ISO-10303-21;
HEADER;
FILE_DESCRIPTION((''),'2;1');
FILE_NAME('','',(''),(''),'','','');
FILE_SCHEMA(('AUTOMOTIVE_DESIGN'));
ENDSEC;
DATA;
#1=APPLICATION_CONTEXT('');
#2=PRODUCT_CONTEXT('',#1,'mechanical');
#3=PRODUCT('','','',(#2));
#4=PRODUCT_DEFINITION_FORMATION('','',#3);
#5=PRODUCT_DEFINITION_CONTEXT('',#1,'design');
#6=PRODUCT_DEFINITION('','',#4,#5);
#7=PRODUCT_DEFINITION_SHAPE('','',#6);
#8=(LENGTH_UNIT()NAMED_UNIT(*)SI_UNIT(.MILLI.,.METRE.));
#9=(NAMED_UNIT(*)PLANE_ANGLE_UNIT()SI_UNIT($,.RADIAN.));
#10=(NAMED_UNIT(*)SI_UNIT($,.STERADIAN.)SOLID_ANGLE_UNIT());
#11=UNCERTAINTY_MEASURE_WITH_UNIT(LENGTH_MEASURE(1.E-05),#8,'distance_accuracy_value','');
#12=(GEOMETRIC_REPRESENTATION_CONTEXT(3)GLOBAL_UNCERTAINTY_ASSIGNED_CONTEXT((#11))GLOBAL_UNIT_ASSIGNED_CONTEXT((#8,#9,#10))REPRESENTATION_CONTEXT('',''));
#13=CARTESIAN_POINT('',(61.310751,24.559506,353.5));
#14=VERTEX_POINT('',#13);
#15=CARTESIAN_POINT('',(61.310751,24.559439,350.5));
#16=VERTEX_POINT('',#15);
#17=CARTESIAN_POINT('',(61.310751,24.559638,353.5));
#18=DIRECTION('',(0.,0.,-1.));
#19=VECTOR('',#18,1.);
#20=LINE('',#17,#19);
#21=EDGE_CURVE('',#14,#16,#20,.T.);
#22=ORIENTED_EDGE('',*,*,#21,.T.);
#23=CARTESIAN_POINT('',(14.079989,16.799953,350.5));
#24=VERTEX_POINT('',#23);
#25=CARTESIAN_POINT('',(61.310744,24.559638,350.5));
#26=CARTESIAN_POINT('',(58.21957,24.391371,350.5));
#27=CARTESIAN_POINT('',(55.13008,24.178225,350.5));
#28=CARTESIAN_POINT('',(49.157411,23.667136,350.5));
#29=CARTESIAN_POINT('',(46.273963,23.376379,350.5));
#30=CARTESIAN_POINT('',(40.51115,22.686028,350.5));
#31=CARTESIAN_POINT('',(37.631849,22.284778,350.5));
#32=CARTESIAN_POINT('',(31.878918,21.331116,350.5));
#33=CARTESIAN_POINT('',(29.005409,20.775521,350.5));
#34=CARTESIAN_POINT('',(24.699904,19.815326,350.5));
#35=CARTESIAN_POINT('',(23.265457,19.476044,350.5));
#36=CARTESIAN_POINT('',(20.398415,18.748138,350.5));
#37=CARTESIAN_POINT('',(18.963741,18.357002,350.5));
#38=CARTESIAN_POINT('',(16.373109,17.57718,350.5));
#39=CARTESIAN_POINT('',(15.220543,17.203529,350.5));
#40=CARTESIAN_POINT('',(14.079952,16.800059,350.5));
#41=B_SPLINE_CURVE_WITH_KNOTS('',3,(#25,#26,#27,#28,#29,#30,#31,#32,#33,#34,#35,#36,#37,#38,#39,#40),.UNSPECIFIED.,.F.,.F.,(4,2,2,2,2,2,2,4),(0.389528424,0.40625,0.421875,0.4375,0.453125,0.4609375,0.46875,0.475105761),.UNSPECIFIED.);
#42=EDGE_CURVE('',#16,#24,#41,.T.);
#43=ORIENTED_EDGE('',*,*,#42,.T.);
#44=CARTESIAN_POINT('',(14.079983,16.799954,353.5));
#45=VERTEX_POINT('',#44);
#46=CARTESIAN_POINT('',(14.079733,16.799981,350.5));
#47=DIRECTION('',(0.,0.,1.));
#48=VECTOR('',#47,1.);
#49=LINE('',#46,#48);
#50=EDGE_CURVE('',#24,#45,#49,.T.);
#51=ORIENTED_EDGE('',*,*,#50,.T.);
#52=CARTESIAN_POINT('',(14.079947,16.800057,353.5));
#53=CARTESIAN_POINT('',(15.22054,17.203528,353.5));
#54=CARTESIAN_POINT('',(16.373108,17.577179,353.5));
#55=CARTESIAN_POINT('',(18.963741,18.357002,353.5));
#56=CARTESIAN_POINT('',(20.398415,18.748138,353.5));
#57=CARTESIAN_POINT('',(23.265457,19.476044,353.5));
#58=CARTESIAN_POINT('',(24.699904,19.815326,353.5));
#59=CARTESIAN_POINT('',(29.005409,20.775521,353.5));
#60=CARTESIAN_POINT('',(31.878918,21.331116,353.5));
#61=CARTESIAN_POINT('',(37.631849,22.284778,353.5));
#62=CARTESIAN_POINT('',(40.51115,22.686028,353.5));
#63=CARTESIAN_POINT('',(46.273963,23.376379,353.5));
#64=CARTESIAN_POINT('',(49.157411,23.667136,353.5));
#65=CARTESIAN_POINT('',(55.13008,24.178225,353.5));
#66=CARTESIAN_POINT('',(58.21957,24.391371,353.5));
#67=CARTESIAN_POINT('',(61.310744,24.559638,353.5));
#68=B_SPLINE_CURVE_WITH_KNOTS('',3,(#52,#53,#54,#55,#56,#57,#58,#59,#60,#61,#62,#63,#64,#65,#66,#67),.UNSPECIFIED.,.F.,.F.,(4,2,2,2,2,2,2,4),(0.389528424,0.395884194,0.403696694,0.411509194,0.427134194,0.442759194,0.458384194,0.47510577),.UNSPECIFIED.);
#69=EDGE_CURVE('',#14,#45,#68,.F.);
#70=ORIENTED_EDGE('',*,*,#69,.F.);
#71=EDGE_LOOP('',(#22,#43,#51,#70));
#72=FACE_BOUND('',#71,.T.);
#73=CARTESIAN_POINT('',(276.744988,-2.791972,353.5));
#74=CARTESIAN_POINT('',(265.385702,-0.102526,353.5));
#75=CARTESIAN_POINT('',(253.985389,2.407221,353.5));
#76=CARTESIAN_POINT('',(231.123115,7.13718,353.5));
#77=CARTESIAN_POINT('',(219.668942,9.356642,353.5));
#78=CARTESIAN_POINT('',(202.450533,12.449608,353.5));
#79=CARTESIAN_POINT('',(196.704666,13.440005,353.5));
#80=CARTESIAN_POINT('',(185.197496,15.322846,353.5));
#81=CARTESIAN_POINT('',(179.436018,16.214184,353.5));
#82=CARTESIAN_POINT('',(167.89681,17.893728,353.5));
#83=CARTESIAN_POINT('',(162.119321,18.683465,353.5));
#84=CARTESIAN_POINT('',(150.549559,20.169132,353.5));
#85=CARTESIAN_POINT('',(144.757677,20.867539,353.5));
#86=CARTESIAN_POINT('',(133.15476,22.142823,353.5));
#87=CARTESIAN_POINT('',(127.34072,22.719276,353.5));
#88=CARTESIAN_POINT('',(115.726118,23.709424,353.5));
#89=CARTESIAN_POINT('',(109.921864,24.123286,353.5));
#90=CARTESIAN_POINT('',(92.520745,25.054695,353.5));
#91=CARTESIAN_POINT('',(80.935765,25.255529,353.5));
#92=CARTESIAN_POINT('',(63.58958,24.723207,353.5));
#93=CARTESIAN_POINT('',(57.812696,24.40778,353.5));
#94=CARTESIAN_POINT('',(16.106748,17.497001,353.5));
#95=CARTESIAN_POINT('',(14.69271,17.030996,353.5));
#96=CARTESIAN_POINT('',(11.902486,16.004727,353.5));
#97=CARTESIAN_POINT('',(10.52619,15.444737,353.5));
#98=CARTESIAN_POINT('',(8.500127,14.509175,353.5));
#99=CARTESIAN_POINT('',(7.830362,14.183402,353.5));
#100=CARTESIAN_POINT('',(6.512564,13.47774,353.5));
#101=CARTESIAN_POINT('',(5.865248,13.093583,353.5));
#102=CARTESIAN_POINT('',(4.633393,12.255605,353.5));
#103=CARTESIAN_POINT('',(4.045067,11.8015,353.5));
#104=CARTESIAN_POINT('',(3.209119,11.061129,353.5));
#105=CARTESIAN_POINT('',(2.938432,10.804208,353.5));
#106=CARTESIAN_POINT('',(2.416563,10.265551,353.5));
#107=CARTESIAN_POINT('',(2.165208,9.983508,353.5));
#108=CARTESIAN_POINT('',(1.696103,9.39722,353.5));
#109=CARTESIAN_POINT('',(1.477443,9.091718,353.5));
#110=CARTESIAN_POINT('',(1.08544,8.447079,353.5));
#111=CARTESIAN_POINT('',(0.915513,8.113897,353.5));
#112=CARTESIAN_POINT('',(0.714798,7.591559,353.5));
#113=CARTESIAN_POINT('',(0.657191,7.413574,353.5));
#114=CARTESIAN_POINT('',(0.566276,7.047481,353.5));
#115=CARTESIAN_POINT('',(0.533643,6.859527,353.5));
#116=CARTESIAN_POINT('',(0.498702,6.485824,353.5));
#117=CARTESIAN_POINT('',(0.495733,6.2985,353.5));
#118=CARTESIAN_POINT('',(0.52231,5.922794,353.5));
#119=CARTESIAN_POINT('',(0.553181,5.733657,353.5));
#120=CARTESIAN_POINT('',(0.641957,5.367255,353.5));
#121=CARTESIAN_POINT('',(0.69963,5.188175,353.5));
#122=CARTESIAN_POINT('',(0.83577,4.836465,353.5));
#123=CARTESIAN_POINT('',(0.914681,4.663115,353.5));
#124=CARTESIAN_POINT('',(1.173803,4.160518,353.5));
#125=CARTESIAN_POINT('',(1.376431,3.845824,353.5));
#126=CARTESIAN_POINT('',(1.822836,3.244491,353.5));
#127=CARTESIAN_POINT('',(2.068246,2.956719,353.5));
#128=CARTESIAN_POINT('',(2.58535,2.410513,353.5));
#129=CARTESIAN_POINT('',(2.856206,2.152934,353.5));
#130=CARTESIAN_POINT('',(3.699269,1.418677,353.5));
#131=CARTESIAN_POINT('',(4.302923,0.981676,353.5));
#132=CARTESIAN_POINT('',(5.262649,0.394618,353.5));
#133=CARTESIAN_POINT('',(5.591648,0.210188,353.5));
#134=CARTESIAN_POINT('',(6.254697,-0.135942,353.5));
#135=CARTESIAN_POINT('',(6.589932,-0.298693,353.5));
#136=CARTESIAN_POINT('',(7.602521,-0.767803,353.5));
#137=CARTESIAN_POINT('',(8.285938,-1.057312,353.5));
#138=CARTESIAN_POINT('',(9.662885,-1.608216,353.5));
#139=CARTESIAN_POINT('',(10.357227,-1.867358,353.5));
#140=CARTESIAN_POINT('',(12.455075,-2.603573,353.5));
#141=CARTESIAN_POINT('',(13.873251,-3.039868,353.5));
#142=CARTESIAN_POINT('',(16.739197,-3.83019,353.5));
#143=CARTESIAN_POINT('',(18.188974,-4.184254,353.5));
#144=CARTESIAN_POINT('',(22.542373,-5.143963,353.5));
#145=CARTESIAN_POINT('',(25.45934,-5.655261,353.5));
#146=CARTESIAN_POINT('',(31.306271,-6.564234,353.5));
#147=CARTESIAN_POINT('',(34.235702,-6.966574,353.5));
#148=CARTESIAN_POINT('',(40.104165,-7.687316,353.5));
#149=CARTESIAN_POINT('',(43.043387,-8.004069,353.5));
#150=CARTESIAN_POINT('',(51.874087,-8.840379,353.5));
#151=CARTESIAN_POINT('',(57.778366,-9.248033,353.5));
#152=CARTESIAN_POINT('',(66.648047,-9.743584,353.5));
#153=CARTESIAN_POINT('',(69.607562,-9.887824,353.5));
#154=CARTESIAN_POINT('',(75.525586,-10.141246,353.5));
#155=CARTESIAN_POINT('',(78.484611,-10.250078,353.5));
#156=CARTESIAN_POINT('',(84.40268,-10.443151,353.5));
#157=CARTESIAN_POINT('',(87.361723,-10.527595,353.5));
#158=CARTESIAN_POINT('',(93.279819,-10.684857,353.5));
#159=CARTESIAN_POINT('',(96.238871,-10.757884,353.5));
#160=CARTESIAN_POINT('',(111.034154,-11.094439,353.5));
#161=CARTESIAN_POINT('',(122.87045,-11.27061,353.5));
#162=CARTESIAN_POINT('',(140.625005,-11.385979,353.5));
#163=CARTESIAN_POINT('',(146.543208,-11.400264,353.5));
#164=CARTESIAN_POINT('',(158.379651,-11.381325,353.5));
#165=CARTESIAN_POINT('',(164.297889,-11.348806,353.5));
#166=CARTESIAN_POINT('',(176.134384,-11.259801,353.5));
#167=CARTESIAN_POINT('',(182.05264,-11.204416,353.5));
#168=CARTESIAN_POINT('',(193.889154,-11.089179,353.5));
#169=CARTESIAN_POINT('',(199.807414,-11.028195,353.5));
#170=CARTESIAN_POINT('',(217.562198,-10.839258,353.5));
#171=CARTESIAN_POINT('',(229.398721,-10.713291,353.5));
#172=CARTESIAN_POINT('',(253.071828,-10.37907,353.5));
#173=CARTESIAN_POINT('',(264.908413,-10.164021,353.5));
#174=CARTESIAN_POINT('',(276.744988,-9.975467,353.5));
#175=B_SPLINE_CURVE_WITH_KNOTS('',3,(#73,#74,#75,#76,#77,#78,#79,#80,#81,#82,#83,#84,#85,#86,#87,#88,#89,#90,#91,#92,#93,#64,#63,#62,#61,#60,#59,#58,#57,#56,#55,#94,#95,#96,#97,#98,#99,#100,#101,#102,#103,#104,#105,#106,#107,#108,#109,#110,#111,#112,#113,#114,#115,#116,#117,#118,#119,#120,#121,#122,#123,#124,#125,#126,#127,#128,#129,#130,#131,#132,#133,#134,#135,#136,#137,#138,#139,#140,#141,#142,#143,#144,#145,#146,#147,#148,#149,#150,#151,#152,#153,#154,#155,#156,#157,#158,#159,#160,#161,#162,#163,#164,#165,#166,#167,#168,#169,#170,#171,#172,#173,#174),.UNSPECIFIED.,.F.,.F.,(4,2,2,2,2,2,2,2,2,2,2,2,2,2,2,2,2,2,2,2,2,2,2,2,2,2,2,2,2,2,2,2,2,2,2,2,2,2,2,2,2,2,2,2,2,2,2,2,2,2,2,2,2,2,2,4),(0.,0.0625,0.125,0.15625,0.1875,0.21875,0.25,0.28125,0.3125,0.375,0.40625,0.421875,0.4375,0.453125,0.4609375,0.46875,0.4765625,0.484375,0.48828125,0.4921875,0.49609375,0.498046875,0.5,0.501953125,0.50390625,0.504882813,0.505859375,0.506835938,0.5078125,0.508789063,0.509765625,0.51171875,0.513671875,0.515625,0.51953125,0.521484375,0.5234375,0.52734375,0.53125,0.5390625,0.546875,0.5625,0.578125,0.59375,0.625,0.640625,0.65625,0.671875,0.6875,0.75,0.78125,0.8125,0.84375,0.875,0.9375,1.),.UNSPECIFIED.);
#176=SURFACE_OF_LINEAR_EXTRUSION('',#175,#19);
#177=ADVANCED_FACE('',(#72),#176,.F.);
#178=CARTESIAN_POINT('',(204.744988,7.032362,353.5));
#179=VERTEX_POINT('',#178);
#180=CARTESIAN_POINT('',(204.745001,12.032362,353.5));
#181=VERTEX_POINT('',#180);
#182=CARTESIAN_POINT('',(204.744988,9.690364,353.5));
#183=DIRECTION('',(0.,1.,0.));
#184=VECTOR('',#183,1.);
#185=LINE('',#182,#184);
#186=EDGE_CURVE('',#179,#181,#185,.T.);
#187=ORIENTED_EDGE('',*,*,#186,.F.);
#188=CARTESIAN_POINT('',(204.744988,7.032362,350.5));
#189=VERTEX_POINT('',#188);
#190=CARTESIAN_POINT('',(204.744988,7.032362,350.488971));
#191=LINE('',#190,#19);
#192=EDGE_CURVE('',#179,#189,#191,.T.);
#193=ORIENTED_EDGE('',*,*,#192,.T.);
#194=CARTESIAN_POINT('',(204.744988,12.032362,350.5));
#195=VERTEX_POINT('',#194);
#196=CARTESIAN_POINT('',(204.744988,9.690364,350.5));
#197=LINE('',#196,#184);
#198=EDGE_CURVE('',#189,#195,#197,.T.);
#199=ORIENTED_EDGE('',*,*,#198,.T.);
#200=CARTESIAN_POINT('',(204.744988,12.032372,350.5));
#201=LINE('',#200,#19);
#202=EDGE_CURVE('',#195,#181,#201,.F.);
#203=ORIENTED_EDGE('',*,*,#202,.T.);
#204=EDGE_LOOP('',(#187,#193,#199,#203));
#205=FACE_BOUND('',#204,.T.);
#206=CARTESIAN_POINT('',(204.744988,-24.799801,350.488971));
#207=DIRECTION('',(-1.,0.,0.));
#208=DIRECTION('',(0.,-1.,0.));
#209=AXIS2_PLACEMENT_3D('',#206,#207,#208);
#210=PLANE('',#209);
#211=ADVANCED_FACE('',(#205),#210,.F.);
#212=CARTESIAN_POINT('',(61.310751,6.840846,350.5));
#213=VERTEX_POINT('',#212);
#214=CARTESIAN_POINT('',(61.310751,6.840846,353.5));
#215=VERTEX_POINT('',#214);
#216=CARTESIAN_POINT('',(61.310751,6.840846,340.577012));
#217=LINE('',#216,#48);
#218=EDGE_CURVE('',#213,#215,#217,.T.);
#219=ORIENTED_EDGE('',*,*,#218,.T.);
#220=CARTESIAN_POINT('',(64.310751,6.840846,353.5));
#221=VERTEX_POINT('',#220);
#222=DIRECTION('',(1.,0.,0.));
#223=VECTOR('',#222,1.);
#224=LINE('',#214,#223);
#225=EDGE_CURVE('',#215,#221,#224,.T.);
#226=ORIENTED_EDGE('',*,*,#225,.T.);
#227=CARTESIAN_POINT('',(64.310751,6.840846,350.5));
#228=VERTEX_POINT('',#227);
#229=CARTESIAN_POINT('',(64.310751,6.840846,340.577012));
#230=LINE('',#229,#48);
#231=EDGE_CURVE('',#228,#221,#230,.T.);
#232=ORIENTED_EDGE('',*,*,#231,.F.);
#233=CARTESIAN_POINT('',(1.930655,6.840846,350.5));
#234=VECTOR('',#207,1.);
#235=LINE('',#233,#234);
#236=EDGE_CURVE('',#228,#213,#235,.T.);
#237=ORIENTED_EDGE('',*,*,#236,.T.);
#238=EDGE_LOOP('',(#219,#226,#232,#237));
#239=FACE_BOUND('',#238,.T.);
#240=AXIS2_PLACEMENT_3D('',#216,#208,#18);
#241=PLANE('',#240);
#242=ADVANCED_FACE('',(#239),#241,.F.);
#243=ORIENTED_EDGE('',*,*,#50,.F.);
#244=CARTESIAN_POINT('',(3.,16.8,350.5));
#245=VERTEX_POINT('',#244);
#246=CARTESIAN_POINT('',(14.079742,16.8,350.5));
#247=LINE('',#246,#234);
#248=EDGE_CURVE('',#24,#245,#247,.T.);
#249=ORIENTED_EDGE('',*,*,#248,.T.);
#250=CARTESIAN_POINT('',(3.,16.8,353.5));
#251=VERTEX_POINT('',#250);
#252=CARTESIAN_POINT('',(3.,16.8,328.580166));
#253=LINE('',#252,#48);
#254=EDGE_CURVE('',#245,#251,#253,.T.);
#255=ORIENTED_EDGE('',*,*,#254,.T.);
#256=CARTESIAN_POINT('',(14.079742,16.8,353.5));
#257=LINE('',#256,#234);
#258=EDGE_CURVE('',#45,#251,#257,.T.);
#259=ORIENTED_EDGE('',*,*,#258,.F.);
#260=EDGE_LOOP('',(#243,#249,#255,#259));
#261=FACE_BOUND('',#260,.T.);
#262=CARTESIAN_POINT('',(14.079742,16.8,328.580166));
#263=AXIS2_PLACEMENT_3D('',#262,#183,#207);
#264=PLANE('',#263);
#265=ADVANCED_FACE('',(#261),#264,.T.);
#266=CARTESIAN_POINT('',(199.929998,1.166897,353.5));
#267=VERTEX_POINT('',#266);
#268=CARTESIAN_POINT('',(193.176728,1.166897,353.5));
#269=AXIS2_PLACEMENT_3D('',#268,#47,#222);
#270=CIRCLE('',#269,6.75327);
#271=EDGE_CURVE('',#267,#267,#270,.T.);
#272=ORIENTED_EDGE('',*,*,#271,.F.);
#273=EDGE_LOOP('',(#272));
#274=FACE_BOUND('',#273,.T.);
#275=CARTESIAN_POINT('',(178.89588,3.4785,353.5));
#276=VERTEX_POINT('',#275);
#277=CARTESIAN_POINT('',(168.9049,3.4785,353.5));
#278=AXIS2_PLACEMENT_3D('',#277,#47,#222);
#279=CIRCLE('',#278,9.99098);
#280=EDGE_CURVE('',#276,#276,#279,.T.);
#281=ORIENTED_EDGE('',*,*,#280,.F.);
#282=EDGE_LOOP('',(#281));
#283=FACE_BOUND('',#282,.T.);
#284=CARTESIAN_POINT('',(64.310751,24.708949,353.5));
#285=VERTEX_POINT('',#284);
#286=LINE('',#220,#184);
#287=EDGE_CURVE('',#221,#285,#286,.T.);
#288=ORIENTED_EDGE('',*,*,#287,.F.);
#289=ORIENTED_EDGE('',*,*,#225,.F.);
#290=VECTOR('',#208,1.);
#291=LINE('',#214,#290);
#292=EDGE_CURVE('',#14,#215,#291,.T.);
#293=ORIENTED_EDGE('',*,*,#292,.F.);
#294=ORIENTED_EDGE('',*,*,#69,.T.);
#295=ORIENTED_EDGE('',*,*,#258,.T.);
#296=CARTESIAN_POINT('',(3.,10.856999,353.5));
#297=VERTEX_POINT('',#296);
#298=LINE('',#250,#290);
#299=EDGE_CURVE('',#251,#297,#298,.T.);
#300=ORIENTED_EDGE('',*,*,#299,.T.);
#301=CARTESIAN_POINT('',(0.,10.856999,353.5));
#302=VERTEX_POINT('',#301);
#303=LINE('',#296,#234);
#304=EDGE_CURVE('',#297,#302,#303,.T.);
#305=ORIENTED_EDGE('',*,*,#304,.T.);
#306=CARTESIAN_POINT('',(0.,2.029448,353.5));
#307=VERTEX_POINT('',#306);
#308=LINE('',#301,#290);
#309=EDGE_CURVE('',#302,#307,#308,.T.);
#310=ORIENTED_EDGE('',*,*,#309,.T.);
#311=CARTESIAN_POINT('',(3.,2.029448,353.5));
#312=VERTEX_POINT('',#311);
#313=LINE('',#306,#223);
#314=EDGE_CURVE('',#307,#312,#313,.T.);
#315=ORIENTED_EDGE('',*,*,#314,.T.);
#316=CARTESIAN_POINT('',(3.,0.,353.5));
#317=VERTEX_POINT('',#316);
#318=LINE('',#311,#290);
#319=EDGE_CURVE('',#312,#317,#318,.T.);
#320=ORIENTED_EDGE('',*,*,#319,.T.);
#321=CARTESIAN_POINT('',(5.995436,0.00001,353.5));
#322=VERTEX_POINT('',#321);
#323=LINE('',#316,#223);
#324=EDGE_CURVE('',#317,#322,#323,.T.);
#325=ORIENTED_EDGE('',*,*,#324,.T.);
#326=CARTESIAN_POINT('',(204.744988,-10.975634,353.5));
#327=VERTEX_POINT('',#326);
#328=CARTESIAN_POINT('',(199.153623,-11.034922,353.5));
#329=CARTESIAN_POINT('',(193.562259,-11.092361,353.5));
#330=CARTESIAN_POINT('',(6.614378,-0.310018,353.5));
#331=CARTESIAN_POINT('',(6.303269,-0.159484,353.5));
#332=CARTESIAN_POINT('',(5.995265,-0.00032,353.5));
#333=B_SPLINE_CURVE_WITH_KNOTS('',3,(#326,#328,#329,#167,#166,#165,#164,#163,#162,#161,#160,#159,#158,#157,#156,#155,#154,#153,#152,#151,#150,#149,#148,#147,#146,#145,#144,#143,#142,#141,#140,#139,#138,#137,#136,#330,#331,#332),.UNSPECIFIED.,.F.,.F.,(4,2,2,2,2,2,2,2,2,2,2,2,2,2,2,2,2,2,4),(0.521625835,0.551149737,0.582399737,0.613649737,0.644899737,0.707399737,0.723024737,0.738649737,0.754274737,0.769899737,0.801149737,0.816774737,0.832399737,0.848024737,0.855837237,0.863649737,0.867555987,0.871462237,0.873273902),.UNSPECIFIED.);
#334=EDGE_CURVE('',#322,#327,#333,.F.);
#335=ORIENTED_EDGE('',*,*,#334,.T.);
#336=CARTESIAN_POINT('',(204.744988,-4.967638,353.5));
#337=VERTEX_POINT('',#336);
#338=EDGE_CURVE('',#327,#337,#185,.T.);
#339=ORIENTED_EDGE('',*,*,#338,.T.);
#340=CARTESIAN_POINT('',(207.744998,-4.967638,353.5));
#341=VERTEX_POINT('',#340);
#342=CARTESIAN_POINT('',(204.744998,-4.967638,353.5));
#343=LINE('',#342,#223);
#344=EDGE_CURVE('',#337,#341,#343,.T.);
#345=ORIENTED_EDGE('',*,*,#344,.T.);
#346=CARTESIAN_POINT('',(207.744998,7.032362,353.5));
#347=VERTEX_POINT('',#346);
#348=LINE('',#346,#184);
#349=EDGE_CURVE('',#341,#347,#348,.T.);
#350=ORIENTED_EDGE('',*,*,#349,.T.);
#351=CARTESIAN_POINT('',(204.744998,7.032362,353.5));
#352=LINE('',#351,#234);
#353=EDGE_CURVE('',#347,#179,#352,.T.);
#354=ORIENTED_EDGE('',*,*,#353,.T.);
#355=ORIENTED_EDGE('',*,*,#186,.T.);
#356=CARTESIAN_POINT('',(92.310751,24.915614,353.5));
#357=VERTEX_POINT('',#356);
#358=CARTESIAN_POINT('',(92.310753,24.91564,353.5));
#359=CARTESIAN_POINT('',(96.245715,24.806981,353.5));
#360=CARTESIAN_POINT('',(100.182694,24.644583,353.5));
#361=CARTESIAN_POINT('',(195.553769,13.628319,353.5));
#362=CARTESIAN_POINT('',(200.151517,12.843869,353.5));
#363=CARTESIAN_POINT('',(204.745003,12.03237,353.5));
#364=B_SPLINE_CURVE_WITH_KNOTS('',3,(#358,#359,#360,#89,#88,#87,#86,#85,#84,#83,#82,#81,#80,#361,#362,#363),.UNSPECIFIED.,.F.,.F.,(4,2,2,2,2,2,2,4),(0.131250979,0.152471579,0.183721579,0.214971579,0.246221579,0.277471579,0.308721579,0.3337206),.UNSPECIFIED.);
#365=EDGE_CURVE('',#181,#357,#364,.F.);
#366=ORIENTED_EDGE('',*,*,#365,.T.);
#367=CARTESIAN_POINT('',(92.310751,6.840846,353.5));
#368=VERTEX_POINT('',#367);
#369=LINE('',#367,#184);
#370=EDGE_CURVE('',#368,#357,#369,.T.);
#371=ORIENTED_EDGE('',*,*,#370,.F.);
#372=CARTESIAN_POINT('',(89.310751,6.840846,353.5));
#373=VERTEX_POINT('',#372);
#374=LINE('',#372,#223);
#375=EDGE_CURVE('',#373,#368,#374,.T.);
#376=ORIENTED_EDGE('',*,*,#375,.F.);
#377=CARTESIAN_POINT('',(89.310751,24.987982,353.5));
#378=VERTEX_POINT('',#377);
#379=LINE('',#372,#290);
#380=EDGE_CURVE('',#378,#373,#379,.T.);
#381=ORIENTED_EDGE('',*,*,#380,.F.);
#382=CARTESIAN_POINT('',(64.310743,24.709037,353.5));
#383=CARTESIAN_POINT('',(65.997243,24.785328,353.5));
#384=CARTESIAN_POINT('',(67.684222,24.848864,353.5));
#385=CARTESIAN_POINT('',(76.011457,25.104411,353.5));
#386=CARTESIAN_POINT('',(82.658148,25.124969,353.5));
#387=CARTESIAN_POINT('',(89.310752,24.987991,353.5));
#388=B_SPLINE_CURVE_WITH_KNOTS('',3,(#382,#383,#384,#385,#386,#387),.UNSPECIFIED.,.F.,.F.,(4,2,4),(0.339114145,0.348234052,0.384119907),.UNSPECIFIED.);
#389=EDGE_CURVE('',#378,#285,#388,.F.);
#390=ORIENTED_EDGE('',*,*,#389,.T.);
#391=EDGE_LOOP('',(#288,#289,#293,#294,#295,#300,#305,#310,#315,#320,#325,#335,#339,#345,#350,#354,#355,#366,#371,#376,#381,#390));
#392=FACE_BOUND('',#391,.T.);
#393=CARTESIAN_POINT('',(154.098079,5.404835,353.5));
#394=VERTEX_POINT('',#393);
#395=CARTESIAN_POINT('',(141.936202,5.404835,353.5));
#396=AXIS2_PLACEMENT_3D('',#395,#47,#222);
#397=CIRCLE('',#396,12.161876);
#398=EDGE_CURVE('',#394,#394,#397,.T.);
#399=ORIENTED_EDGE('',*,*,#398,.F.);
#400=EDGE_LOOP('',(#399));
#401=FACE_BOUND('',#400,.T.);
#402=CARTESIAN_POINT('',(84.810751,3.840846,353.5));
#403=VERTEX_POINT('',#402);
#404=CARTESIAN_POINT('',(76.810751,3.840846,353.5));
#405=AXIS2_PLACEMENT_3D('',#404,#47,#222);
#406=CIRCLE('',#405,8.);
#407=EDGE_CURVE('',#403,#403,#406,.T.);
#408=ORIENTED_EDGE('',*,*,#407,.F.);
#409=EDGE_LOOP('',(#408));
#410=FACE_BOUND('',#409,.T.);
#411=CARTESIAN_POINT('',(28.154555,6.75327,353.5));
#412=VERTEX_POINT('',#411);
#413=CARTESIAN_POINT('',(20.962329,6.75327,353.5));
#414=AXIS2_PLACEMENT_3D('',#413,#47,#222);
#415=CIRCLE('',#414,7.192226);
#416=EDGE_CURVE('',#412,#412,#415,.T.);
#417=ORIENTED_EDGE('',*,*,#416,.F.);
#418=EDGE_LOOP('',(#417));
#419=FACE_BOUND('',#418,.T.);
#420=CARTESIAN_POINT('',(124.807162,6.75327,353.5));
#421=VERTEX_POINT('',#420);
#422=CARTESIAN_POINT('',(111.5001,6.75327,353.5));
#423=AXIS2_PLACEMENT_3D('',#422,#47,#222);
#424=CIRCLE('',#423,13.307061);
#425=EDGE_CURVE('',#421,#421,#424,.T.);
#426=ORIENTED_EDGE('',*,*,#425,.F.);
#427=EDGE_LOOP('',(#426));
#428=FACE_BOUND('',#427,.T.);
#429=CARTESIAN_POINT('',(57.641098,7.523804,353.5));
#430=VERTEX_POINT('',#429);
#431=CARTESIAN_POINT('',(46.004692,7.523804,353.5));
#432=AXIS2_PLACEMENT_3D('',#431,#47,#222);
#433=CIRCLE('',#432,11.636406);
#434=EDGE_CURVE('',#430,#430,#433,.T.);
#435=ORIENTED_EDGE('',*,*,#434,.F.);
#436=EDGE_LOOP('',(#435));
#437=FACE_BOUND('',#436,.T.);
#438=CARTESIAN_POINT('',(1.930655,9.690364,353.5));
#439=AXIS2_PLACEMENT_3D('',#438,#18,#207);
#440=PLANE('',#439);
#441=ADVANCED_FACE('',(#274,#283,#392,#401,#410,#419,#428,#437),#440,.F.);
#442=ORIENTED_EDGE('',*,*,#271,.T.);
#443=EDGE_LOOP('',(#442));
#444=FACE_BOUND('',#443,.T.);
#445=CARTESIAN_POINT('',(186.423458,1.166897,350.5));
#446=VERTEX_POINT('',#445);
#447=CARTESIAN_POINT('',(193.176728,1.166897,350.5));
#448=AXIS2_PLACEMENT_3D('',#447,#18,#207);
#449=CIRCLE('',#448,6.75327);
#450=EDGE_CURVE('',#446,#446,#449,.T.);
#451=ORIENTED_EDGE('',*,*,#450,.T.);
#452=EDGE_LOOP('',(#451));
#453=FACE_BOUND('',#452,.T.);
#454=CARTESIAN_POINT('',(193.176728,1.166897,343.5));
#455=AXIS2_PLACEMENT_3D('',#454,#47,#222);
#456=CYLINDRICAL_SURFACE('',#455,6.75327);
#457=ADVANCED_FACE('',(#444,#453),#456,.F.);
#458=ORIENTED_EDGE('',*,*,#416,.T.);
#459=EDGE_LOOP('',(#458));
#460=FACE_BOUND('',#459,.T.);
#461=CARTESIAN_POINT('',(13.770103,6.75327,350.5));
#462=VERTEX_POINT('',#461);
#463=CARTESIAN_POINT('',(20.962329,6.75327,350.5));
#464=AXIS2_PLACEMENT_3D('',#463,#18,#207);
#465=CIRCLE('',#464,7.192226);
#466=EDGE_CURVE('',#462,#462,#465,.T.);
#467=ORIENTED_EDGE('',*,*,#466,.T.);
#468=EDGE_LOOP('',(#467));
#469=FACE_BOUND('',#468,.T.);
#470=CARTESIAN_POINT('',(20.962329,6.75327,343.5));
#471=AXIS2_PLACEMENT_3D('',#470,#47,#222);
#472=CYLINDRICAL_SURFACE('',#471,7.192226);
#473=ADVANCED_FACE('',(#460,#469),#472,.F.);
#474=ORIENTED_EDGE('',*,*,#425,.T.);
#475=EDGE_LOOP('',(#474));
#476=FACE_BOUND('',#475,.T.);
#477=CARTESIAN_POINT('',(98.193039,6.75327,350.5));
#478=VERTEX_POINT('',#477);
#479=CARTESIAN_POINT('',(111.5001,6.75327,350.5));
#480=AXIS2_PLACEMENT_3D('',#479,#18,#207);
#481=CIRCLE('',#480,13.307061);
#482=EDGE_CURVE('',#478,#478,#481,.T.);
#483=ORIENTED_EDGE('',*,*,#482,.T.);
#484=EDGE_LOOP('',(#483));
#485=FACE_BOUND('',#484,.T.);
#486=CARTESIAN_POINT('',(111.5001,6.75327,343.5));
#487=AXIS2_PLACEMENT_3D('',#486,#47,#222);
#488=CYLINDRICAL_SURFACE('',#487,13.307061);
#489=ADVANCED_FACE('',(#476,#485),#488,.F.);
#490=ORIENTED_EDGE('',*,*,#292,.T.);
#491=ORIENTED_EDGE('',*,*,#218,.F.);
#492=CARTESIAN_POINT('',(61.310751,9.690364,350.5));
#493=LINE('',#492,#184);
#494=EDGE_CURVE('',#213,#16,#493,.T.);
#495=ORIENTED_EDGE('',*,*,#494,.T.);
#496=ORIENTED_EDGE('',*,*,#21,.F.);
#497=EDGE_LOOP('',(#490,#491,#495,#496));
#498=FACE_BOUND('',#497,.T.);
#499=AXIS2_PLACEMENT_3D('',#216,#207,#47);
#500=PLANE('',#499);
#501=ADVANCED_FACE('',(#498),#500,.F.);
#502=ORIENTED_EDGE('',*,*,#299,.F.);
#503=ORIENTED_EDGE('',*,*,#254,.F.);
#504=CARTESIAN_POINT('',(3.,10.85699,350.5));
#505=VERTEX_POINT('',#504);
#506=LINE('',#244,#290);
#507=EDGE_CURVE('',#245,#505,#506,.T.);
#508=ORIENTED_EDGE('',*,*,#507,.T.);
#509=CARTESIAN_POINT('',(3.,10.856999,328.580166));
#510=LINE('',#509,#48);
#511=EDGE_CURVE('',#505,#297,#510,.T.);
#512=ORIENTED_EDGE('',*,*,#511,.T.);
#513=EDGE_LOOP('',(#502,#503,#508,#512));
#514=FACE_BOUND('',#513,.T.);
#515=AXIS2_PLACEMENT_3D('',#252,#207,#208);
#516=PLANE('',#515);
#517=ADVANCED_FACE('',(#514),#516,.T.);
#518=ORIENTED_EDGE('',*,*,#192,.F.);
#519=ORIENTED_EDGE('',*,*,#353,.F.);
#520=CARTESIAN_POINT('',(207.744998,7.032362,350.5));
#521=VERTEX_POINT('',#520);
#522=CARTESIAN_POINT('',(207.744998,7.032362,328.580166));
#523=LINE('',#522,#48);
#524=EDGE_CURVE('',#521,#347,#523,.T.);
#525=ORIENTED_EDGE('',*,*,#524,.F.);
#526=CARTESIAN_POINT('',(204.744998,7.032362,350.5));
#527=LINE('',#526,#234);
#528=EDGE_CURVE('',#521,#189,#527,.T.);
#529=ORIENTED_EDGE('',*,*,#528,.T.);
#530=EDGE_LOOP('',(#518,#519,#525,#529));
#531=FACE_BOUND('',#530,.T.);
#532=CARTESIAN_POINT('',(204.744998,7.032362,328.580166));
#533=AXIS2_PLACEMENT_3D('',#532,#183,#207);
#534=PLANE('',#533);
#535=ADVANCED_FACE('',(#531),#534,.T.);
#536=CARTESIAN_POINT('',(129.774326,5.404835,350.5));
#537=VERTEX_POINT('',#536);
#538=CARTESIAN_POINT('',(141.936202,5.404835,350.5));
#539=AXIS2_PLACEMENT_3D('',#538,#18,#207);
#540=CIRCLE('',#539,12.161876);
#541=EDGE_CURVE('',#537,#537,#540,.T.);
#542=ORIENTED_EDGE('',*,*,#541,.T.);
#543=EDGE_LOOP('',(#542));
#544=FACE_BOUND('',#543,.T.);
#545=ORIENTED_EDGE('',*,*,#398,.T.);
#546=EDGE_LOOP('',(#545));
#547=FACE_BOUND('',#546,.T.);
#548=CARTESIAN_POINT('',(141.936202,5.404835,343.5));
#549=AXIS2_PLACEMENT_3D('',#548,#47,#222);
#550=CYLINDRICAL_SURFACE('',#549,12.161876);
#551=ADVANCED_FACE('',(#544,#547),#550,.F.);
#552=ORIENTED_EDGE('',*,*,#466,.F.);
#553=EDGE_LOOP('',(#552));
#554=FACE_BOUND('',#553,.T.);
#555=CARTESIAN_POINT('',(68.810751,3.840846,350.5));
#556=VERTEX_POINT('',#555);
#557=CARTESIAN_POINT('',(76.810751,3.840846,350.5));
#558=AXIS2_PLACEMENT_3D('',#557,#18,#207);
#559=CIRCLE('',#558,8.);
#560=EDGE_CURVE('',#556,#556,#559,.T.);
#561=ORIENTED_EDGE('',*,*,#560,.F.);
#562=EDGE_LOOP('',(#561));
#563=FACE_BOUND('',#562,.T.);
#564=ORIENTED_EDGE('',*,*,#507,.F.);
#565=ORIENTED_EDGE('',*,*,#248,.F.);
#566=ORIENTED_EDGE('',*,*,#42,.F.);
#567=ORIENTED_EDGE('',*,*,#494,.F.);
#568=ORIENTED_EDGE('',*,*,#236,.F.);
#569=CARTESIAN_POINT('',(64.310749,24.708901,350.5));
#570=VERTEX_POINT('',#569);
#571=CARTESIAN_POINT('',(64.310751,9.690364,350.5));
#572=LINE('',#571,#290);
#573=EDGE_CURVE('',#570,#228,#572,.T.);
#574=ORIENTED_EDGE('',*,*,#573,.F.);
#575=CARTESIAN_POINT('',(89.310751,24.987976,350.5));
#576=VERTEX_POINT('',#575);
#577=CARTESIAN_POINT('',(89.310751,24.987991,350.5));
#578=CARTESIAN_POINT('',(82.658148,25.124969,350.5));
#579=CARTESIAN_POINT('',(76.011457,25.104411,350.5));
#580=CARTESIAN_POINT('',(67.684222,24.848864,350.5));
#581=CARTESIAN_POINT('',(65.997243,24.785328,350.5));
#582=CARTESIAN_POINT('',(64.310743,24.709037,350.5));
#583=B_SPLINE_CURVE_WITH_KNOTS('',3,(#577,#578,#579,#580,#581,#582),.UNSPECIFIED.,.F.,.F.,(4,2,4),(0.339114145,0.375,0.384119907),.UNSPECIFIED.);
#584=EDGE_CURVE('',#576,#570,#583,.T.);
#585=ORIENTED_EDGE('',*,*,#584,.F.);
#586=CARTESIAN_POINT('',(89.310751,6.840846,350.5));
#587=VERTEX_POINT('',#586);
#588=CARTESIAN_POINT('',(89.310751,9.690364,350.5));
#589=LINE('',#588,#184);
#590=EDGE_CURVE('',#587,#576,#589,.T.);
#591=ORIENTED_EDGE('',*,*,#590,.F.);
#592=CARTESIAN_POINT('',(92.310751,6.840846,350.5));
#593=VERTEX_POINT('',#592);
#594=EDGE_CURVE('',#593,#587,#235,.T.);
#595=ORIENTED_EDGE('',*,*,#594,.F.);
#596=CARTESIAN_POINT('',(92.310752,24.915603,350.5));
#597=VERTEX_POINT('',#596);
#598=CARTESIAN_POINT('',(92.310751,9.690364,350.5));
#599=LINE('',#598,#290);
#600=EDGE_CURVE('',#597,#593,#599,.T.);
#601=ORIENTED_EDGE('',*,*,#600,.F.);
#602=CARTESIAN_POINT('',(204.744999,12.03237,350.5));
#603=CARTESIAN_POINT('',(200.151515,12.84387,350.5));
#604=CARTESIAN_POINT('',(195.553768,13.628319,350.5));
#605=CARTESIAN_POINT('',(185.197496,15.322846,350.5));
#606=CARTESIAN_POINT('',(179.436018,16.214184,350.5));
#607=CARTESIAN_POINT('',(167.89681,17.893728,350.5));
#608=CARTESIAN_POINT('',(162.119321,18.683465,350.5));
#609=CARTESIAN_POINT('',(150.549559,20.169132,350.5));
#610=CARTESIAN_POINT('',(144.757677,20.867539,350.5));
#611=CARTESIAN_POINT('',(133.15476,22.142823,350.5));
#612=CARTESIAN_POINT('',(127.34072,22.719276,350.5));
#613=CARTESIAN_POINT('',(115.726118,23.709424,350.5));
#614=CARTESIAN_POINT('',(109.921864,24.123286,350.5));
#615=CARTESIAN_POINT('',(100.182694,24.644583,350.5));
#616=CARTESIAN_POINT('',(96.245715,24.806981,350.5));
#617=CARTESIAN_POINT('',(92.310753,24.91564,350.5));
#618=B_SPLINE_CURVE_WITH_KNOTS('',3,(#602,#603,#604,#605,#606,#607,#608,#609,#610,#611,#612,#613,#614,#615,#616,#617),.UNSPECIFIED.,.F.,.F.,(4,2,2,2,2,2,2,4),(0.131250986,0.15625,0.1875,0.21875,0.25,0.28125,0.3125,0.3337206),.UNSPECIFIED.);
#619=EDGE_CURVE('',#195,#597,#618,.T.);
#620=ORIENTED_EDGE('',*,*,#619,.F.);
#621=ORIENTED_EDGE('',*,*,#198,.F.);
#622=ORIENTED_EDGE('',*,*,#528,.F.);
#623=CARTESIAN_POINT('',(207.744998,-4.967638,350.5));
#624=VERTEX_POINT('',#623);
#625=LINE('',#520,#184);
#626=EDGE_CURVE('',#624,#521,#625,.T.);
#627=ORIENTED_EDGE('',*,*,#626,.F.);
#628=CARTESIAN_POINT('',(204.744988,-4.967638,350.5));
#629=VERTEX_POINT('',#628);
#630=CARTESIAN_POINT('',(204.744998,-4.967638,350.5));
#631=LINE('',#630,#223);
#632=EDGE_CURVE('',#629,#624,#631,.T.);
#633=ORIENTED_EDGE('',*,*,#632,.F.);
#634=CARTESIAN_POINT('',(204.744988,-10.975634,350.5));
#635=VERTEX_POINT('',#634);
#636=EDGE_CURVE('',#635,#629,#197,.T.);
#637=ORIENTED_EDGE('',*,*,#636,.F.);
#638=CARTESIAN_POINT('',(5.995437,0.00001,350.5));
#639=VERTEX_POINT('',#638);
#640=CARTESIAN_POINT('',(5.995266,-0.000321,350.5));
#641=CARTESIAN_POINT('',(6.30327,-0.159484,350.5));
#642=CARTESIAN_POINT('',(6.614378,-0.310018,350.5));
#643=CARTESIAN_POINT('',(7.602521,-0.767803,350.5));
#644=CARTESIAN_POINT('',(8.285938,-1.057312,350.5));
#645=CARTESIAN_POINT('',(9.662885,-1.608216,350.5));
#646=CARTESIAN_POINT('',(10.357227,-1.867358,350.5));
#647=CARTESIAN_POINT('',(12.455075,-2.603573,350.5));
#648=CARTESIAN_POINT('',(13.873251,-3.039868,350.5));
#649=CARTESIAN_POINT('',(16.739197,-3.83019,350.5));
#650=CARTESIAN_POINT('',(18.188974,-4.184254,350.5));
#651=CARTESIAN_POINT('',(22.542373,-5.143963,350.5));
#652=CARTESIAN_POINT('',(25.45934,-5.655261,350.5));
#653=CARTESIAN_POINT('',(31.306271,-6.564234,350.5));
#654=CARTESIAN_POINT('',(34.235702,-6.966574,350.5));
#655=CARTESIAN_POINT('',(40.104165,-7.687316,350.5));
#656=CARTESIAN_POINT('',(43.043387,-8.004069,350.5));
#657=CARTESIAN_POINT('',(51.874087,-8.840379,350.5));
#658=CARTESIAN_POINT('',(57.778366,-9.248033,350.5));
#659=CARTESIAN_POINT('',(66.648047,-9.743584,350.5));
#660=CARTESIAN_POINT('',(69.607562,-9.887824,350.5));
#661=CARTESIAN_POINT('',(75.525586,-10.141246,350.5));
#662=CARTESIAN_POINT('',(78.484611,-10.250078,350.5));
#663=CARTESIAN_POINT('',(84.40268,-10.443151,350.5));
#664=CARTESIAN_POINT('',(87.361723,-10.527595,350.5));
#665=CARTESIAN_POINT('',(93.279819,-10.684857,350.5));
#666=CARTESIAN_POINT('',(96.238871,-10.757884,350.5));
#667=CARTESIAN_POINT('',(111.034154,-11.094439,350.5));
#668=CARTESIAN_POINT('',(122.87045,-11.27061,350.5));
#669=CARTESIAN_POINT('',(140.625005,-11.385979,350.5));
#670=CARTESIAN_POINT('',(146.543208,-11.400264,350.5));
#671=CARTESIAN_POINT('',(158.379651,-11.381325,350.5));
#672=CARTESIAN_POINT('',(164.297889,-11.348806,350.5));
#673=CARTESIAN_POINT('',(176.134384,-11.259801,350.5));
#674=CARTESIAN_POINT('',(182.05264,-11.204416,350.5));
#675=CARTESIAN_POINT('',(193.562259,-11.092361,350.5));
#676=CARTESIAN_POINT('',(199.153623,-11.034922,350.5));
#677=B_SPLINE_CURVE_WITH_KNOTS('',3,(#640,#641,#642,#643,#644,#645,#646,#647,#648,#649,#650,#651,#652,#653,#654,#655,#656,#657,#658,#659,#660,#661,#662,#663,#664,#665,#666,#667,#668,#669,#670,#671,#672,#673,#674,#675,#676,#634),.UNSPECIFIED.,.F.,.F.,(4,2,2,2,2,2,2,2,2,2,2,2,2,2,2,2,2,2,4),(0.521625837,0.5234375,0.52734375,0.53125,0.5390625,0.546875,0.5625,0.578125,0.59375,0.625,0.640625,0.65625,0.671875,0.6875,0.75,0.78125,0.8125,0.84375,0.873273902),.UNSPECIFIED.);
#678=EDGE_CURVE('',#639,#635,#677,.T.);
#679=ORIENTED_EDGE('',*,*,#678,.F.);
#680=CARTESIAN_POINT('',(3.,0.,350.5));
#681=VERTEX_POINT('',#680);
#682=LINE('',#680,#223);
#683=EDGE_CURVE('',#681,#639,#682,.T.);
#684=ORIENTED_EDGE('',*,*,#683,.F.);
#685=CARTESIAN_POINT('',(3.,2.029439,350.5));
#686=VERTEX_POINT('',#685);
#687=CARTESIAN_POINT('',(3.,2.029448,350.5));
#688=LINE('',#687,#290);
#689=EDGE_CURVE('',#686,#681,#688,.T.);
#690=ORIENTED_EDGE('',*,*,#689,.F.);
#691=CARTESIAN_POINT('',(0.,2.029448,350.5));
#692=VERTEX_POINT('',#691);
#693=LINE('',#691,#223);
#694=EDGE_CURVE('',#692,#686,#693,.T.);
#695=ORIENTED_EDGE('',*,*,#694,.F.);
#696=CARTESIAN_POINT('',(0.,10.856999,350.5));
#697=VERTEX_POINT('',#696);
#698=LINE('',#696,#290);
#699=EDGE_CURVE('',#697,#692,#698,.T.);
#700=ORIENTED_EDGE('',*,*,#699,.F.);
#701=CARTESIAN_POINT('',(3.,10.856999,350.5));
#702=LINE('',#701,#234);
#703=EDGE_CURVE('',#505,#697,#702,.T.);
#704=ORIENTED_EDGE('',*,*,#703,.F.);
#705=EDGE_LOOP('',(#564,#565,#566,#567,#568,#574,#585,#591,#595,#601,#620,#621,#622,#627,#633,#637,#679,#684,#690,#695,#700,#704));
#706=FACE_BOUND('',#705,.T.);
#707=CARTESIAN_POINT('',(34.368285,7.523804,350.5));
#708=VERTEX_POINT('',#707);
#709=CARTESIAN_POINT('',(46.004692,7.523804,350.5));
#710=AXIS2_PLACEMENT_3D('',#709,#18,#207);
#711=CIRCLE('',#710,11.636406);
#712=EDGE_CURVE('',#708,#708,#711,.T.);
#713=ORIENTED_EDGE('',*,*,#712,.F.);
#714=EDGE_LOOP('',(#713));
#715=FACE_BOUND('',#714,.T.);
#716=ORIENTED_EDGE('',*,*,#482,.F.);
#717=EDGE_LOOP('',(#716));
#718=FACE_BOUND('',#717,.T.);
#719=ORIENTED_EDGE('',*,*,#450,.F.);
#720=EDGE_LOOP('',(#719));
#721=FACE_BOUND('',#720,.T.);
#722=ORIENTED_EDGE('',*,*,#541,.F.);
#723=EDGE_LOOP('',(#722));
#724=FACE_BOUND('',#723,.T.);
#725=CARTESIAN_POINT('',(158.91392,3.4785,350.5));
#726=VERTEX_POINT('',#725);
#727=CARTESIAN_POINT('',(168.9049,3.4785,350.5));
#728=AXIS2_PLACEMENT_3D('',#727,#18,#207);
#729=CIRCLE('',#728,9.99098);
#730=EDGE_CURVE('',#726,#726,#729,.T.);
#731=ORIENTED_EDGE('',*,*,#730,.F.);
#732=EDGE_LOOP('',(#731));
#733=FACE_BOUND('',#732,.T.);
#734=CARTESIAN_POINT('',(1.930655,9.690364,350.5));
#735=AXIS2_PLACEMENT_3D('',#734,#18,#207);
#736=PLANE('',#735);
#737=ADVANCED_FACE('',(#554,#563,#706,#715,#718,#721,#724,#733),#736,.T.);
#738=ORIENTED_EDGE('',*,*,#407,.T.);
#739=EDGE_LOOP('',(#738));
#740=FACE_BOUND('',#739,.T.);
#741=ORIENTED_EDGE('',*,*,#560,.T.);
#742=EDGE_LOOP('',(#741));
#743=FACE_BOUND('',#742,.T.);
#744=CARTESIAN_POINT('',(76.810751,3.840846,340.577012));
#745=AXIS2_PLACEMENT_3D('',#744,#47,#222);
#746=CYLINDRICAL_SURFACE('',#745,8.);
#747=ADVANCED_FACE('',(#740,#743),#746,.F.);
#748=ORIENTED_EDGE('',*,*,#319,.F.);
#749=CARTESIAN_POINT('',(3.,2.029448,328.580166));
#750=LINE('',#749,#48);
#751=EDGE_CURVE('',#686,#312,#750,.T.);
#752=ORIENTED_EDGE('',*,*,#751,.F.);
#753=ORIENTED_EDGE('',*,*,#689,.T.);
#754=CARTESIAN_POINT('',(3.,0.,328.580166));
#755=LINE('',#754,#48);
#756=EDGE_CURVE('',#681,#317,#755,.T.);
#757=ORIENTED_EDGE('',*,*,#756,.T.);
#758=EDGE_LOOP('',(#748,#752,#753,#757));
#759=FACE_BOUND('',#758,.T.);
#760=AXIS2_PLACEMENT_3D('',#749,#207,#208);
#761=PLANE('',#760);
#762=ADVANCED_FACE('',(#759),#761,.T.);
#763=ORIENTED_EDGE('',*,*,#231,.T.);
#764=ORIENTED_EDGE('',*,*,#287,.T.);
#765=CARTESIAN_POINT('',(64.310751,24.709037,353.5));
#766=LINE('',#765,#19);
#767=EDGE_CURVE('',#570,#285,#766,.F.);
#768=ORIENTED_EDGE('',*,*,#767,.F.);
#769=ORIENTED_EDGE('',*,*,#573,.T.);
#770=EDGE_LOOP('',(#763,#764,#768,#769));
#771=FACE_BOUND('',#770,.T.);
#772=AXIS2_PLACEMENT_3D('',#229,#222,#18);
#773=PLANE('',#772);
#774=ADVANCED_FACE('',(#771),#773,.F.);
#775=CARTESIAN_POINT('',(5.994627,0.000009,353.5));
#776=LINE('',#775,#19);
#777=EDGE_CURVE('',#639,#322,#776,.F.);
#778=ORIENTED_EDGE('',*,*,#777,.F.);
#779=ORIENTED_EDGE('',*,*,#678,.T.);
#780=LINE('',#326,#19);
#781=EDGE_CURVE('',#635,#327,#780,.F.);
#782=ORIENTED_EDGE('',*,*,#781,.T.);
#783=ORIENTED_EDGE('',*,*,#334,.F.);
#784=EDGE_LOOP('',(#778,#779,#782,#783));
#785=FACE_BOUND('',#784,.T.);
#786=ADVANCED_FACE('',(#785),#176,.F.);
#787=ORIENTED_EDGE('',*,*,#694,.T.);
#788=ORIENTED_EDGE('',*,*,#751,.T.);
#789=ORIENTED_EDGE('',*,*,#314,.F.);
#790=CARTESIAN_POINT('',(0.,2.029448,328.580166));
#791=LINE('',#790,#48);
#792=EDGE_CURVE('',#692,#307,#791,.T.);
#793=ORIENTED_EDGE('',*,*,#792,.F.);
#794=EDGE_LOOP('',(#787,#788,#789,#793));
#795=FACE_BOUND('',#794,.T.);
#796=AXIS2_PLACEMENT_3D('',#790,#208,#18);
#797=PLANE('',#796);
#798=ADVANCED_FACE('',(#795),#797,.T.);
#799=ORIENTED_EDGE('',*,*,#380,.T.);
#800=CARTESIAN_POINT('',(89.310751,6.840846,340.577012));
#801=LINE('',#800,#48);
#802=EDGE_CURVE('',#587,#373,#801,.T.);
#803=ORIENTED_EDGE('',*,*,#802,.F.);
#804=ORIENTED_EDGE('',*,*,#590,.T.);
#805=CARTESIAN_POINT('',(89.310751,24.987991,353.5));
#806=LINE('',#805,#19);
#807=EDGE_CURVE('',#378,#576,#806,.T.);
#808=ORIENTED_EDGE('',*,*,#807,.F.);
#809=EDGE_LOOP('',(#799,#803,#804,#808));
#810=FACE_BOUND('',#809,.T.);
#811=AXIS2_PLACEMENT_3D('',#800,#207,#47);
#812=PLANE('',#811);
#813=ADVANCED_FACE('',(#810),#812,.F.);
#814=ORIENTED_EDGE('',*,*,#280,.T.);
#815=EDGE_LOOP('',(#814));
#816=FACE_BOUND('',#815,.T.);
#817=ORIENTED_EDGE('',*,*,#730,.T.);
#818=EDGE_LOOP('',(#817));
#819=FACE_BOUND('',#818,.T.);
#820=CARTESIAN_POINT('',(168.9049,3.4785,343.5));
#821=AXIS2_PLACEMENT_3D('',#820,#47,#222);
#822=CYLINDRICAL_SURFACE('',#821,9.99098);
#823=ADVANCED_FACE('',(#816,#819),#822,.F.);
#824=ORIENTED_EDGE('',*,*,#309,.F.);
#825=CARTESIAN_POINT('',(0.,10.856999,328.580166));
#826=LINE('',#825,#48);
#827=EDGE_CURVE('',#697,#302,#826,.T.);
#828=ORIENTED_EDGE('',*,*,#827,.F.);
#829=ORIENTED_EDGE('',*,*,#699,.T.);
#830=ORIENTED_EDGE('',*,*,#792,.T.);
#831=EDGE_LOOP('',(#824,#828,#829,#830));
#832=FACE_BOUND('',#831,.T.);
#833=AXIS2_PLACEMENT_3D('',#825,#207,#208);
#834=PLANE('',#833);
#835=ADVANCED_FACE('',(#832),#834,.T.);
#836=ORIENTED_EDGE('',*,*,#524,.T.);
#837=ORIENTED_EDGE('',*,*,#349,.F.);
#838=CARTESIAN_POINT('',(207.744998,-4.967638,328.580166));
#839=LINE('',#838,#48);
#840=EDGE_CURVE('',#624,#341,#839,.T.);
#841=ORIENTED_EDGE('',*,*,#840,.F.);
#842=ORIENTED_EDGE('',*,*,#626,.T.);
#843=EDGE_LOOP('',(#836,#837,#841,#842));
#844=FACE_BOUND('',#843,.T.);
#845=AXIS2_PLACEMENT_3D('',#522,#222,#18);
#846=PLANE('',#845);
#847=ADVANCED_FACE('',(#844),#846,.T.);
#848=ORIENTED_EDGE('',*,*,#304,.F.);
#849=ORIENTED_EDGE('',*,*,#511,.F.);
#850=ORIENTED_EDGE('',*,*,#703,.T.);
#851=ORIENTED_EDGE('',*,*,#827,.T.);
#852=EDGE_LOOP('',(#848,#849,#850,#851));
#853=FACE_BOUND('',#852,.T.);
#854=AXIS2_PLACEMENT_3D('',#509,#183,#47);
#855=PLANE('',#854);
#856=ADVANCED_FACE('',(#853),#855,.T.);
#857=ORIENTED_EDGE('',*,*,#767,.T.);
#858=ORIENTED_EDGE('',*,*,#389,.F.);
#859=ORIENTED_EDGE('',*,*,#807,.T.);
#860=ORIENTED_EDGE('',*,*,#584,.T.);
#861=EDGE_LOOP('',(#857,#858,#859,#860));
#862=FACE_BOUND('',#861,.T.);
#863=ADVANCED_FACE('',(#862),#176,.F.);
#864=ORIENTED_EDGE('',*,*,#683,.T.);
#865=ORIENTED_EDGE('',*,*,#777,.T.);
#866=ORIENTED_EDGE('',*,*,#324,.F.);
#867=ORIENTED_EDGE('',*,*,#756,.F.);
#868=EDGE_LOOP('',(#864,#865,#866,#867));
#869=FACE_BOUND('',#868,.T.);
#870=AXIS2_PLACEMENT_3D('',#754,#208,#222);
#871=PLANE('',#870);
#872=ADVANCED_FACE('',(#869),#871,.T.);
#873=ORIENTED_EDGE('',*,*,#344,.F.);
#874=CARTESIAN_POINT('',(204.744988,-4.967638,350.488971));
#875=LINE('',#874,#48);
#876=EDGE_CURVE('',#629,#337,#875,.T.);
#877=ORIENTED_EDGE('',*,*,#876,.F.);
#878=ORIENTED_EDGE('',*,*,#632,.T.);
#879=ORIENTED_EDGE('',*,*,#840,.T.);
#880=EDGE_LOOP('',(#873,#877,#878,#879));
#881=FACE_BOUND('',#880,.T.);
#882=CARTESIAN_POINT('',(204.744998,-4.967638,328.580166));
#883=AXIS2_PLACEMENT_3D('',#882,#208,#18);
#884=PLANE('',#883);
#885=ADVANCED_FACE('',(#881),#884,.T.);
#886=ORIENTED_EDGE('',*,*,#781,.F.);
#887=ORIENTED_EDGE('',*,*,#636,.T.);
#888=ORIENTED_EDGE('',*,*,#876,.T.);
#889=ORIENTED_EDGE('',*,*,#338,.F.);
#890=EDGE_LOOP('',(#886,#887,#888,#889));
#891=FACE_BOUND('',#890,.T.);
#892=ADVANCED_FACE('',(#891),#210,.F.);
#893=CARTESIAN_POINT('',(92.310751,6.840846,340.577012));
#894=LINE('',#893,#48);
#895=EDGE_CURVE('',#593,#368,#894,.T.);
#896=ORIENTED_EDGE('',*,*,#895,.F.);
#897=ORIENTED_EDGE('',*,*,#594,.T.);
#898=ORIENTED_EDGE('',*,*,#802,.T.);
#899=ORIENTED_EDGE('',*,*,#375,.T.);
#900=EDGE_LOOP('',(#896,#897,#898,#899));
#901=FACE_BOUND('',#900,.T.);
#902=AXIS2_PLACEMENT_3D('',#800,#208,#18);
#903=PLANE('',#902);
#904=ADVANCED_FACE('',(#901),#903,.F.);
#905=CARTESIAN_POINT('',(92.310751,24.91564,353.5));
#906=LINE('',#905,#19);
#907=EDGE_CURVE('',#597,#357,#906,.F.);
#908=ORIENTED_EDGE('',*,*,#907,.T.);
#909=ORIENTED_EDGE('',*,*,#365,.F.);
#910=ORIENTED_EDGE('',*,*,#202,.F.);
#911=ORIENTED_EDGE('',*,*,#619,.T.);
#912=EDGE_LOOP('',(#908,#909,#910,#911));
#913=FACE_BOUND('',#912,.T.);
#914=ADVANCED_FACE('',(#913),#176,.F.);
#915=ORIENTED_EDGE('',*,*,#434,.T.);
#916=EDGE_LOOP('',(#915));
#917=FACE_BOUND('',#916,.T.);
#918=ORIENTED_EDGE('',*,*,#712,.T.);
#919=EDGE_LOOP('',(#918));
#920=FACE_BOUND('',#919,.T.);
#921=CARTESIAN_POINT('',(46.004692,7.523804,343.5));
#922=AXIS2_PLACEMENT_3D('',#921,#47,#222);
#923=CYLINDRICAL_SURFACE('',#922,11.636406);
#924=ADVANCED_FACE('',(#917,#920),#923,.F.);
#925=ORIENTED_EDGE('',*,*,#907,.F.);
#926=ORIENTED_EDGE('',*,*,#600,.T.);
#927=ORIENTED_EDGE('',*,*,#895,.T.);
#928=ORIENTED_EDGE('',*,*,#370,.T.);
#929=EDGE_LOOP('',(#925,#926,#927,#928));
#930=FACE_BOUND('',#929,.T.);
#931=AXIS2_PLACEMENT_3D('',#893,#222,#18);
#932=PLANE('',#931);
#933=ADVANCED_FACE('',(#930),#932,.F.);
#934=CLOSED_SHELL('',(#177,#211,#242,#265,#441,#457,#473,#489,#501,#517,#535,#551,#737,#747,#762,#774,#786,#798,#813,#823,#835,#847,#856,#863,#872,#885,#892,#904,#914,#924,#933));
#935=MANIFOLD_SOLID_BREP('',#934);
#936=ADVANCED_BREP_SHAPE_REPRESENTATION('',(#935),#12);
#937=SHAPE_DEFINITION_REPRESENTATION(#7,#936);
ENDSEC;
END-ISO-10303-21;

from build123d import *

# Parameters (mm, degrees)
STOCK_WING_STRUCTURESIZING_1_START = 350.5
STOCK_WING_STRUCTURESIZING_1_DEPTH = 3
CUT_EXTRUDE2_DEPTH                 = 278.894871602
CUT_EXTRUDE2_DEPTH_BACK            = 278.894871602
SKETCH3_R                          = 8
SKETCH3_W                          = 3
SKETCH3_H                          = 18.234468085
CUT_EXTRUDE5_DEPTH                 = 278.894871602
CUT_EXTRUDE5_DEPTH_BACK            = 278.894871602
SKETCH6_W                          = 72
SKETCH6_H                          = 36.832163157
SKETCH7_W                          = 3
SKETCH7_H                          = 29.829109924
CUT_EXTRUDE6_DEPTH                 = 3
BOSS_EXTRUDE1_DEPTH                = 3
SKETCH9_R                          = 7.192226029
SKETCH9_R_2                        = 11.636406179
SKETCH9_R_3                        = 13.307061318
SKETCH9_R_4                        = 12.161876466
SKETCH9_R_5                        = 9.990979792
SKETCH9_R_6                        = 6.753270012
CUT_EXTRUDE7_DEPTH                 = 10


# Read off the part's stored shape, not the designer's step: Stock-Wing_structureSizing-1
with BuildPart() as part:
    # Stock-Wing_structureSizing-1 outline → Stock-Wing_structureSizing-1 (new body)
    with BuildSketch(Plane.XY.offset(STOCK_WING_STRUCTURESIZING_1_START)):
        with BuildLine():
            Line((276.744987748, -9.975467242), (276.744987748, -2.791972149))
            add(Edge.make_bspline(
                [(276.744987748, -2.791972149), (265.3857023, -0.102525952), (253.985388892, 2.407220527), (231.123115134, 7.137179769), (219.66894224, 9.35664169), (202.450532833, 12.449607831), (196.704666185, 13.440005467), (185.197495984, 15.322846112), (179.436018194, 16.214183509), (167.896810084, 17.893728146), (162.119320772, 18.683464695), (150.549559093, 20.169132171), (144.757676972, 20.867539393), (133.154760401, 22.142823058), (127.340720117, 22.719276226), (115.726117513, 23.709424358), (109.921864102, 24.123286294), (92.520744809, 25.054695045), (80.935765142, 25.255529424), (63.589579679, 24.723206588), (57.812696472, 24.40777964), (49.15741104, 23.667136334), (46.27396258, 23.376378774), (40.511150261, 22.68602794), (37.631848569, 22.284778258), (31.878918329, 21.331115885), (29.005409213, 20.775520933), (24.699904445, 19.815325722), (23.265457389, 19.476044022), (20.398415094, 18.74813831), (18.963740816, 18.357002163), (16.106748162, 17.497000764), (14.692710081, 17.03099603), (11.902486035, 16.004726933), (10.526189891, 15.444736939), (8.50012674, 14.509175123), (7.830361802, 14.183402304), (6.512563898, 13.477739544), (5.865248411, 13.093583044), (4.633392785, 12.255605476), (4.045066641, 11.801499914), (3.209118512, 11.061128735), (2.938431583, 10.804207958), (2.416562808, 10.265550671), (2.165207772, 9.983507914), (1.696102707, 9.397220013), (1.477442994, 9.09171798), (1.085439515, 8.447078561), (0.915512906, 8.113897404), (0.714798114, 7.59155933), (0.657190766, 7.413573783), (0.566275814, 7.047480769), (0.533643429, 6.859526942), (0.498702003, 6.485823786), (0.495732967, 6.298500114), (0.52230969, 5.922794269), (0.553180601, 5.733657444), (0.641956646, 5.367254731), (0.699629973, 5.188174612), (0.835770495, 4.836464845), (0.914681224, 4.663114785), (1.173802922, 4.160517642), (1.376431151, 3.845824341), (1.822835658, 3.244491079), (2.068245893, 2.956719217), (2.585349641, 2.410512622), (2.856205808, 2.152934366), (3.699269455, 1.418677094), (4.302923323, 0.981675809), (5.262649419, 0.394618321), (5.591648375, 0.21018796), (6.254696782, -0.135942129), (6.589931521, -0.298692503), (7.602521133, -0.767803382), (8.28593821, -1.057311971), (9.662885491, -1.60821635), (10.357226689, -1.867357708), (12.455074514, -2.603572901), (13.873250521, -3.039868309), (16.739197416, -3.830190303), (18.188973825, -4.184254143), (22.54237297, -5.143962802), (25.459339583, -5.655261329), (31.306270814, -6.564233952), (34.235701619, -6.966574468), (40.104165427, -7.687316125), (43.043386977, -8.004069053), (51.874086741, -8.840379009), (57.778366073, -9.248032718), (66.64804678, -9.743583642), (69.60756187, -9.887823594), (75.525585547, -10.141245843), (78.484610817, -10.250077692), (84.402679828, -10.443151081), (87.361723417, -10.527595381), (93.279819329, -10.684856962), (96.238871496, -10.7578835), (111.034153794, -11.094438823), (122.870449548, -11.270610432), (140.625005024, -11.385979432), (146.54320834, -11.400264082), (158.379650661, -11.381324799), (164.297889136, -11.348805922), (176.134384089, -11.259801078), (182.052639742, -11.204415721), (193.889154401, -11.089178887), (199.807414258, -11.02819544), (217.562198328, -10.839257795), (229.398721047, -10.713290888), (253.0718283, -10.379069852), (264.908412973, -10.164021277), (276.744987748, -9.975467242)],
                knots=[0, 0, 0, 0, 0.0625, 0.0625, 0.125, 0.125, 0.15625, 0.15625, 0.1875, 0.1875, 0.21875, 0.21875, 0.25, 0.25, 0.28125, 0.28125, 0.3125, 0.3125, 0.375, 0.375, 0.40625, 0.40625, 0.421875, 0.421875, 0.4375, 0.4375, 0.453125, 0.453125, 0.4609375, 0.4609375, 0.46875, 0.46875, 0.4765625, 0.4765625, 0.484375, 0.484375, 0.48828125, 0.48828125, 0.4921875, 0.4921875, 0.49609375, 0.49609375, 0.498046875, 0.498046875, 0.5, 0.5, 0.501953125, 0.501953125, 0.50390625, 0.50390625, 0.504882813, 0.504882813, 0.505859375, 0.505859375, 0.506835938, 0.506835938, 0.5078125, 0.5078125, 0.508789063, 0.508789063, 0.509765625, 0.509765625, 0.51171875, 0.51171875, 0.513671875, 0.513671875, 0.515625, 0.515625, 0.51953125, 0.51953125, 0.521484375, 0.521484375, 0.5234375, 0.5234375, 0.52734375, 0.52734375, 0.53125, 0.53125, 0.5390625, 0.5390625, 0.546875, 0.546875, 0.5625, 0.5625, 0.578125, 0.578125, 0.59375, 0.59375, 0.625, 0.625, 0.640625, 0.640625, 0.65625, 0.65625, 0.671875, 0.671875, 0.6875, 0.6875, 0.75, 0.75, 0.78125, 0.78125, 0.8125, 0.8125, 0.84375, 0.84375, 0.875, 0.875, 0.9375, 0.9375, 1, 1, 1, 1], degree=3))
        make_face()
    extrude(amount=STOCK_WING_STRUCTURESIZING_1_DEPTH)

    # Sketch3 → Cut-Extrude2 (cut, two sides: drawn at the far end of the back side and taken through both)
    with BuildSketch(Plane.XY.offset(353.5).offset(-CUT_EXTRUDE2_DEPTH_BACK)):
        with Locations((76.810751166, 3.840845639)):
            Circle(SKETCH3_R)
        with Locations((62.810751166, 15.958079682)):
            Rectangle(SKETCH3_W, SKETCH3_H)
        with Locations((90.810751166, 15.958079682)):
            Rectangle(SKETCH3_W, SKETCH3_H)
    extrude(amount=CUT_EXTRUDE2_DEPTH + CUT_EXTRUDE2_DEPTH_BACK, mode=Mode.SUBTRACT)

    # Sketch6 → Cut-Extrude5 (cut, two sides: drawn at the far end of the back side and taken through both)
    with BuildSketch(Plane.XY.offset(353.5).offset(-CUT_EXTRUDE5_DEPTH_BACK)):
        with Locations((240.744987748, -6.383719695)):
            Rectangle(SKETCH6_W, SKETCH6_H)
    extrude(amount=CUT_EXTRUDE5_DEPTH + CUT_EXTRUDE5_DEPTH_BACK, mode=Mode.SUBTRACT)

    # Sketch7 → Cut-Extrude6 (cut)
    with BuildSketch(Plane.XY.offset(353.5)):
        with Locations((1.5, 14.914554962)):
            Rectangle(SKETCH7_W, SKETCH7_H)
    extrude(amount=-CUT_EXTRUDE6_DEPTH, mode=Mode.SUBTRACT)

    # Sketch8 → Boss-Extrude1 (add)
    with BuildSketch(Plane.XY.offset(353.5)):
        Polygon((14.079741692, 16.8), (3, 16.8), (3, 10.856999155), (0, 10.856999155), (0, 2.029447684), (3, 2.029447684), (3, 0), (5.994622402, 0), align=None)
        Polygon((204.744998472, 7.032361884), (207.744998472, 7.032361884), (207.744998472, -4.967638116), (204.744998472, -4.967638116), (202.527550965, -4.967638116), (202.527550965, 7.032361884), align=None)
    extrude(amount=-BOSS_EXTRUDE1_DEPTH)

    # Sketch9 → Cut-Extrude7 (cut)
    with BuildSketch(Plane.XY.offset(353.5)):
        with Locations((20.96232931, 6.753270012)):
            Circle(SKETCH9_R)
        with Locations((46.004691522, 7.523804234)):
            Circle(SKETCH9_R_2)
        with Locations((111.500100385, 6.753270012)):
            Circle(SKETCH9_R_3)
        with Locations((141.93620215, 5.404835124)):
            Circle(SKETCH9_R_4)
        with Locations((168.904899918, 3.478499569)):
            Circle(SKETCH9_R_5)
        with Locations((193.176727908, 1.166896903)):
            Circle(SKETCH9_R_6)
    extrude(amount=-CUT_EXTRUDE7_DEPTH, mode=Mode.SUBTRACT)


solid = part.part
